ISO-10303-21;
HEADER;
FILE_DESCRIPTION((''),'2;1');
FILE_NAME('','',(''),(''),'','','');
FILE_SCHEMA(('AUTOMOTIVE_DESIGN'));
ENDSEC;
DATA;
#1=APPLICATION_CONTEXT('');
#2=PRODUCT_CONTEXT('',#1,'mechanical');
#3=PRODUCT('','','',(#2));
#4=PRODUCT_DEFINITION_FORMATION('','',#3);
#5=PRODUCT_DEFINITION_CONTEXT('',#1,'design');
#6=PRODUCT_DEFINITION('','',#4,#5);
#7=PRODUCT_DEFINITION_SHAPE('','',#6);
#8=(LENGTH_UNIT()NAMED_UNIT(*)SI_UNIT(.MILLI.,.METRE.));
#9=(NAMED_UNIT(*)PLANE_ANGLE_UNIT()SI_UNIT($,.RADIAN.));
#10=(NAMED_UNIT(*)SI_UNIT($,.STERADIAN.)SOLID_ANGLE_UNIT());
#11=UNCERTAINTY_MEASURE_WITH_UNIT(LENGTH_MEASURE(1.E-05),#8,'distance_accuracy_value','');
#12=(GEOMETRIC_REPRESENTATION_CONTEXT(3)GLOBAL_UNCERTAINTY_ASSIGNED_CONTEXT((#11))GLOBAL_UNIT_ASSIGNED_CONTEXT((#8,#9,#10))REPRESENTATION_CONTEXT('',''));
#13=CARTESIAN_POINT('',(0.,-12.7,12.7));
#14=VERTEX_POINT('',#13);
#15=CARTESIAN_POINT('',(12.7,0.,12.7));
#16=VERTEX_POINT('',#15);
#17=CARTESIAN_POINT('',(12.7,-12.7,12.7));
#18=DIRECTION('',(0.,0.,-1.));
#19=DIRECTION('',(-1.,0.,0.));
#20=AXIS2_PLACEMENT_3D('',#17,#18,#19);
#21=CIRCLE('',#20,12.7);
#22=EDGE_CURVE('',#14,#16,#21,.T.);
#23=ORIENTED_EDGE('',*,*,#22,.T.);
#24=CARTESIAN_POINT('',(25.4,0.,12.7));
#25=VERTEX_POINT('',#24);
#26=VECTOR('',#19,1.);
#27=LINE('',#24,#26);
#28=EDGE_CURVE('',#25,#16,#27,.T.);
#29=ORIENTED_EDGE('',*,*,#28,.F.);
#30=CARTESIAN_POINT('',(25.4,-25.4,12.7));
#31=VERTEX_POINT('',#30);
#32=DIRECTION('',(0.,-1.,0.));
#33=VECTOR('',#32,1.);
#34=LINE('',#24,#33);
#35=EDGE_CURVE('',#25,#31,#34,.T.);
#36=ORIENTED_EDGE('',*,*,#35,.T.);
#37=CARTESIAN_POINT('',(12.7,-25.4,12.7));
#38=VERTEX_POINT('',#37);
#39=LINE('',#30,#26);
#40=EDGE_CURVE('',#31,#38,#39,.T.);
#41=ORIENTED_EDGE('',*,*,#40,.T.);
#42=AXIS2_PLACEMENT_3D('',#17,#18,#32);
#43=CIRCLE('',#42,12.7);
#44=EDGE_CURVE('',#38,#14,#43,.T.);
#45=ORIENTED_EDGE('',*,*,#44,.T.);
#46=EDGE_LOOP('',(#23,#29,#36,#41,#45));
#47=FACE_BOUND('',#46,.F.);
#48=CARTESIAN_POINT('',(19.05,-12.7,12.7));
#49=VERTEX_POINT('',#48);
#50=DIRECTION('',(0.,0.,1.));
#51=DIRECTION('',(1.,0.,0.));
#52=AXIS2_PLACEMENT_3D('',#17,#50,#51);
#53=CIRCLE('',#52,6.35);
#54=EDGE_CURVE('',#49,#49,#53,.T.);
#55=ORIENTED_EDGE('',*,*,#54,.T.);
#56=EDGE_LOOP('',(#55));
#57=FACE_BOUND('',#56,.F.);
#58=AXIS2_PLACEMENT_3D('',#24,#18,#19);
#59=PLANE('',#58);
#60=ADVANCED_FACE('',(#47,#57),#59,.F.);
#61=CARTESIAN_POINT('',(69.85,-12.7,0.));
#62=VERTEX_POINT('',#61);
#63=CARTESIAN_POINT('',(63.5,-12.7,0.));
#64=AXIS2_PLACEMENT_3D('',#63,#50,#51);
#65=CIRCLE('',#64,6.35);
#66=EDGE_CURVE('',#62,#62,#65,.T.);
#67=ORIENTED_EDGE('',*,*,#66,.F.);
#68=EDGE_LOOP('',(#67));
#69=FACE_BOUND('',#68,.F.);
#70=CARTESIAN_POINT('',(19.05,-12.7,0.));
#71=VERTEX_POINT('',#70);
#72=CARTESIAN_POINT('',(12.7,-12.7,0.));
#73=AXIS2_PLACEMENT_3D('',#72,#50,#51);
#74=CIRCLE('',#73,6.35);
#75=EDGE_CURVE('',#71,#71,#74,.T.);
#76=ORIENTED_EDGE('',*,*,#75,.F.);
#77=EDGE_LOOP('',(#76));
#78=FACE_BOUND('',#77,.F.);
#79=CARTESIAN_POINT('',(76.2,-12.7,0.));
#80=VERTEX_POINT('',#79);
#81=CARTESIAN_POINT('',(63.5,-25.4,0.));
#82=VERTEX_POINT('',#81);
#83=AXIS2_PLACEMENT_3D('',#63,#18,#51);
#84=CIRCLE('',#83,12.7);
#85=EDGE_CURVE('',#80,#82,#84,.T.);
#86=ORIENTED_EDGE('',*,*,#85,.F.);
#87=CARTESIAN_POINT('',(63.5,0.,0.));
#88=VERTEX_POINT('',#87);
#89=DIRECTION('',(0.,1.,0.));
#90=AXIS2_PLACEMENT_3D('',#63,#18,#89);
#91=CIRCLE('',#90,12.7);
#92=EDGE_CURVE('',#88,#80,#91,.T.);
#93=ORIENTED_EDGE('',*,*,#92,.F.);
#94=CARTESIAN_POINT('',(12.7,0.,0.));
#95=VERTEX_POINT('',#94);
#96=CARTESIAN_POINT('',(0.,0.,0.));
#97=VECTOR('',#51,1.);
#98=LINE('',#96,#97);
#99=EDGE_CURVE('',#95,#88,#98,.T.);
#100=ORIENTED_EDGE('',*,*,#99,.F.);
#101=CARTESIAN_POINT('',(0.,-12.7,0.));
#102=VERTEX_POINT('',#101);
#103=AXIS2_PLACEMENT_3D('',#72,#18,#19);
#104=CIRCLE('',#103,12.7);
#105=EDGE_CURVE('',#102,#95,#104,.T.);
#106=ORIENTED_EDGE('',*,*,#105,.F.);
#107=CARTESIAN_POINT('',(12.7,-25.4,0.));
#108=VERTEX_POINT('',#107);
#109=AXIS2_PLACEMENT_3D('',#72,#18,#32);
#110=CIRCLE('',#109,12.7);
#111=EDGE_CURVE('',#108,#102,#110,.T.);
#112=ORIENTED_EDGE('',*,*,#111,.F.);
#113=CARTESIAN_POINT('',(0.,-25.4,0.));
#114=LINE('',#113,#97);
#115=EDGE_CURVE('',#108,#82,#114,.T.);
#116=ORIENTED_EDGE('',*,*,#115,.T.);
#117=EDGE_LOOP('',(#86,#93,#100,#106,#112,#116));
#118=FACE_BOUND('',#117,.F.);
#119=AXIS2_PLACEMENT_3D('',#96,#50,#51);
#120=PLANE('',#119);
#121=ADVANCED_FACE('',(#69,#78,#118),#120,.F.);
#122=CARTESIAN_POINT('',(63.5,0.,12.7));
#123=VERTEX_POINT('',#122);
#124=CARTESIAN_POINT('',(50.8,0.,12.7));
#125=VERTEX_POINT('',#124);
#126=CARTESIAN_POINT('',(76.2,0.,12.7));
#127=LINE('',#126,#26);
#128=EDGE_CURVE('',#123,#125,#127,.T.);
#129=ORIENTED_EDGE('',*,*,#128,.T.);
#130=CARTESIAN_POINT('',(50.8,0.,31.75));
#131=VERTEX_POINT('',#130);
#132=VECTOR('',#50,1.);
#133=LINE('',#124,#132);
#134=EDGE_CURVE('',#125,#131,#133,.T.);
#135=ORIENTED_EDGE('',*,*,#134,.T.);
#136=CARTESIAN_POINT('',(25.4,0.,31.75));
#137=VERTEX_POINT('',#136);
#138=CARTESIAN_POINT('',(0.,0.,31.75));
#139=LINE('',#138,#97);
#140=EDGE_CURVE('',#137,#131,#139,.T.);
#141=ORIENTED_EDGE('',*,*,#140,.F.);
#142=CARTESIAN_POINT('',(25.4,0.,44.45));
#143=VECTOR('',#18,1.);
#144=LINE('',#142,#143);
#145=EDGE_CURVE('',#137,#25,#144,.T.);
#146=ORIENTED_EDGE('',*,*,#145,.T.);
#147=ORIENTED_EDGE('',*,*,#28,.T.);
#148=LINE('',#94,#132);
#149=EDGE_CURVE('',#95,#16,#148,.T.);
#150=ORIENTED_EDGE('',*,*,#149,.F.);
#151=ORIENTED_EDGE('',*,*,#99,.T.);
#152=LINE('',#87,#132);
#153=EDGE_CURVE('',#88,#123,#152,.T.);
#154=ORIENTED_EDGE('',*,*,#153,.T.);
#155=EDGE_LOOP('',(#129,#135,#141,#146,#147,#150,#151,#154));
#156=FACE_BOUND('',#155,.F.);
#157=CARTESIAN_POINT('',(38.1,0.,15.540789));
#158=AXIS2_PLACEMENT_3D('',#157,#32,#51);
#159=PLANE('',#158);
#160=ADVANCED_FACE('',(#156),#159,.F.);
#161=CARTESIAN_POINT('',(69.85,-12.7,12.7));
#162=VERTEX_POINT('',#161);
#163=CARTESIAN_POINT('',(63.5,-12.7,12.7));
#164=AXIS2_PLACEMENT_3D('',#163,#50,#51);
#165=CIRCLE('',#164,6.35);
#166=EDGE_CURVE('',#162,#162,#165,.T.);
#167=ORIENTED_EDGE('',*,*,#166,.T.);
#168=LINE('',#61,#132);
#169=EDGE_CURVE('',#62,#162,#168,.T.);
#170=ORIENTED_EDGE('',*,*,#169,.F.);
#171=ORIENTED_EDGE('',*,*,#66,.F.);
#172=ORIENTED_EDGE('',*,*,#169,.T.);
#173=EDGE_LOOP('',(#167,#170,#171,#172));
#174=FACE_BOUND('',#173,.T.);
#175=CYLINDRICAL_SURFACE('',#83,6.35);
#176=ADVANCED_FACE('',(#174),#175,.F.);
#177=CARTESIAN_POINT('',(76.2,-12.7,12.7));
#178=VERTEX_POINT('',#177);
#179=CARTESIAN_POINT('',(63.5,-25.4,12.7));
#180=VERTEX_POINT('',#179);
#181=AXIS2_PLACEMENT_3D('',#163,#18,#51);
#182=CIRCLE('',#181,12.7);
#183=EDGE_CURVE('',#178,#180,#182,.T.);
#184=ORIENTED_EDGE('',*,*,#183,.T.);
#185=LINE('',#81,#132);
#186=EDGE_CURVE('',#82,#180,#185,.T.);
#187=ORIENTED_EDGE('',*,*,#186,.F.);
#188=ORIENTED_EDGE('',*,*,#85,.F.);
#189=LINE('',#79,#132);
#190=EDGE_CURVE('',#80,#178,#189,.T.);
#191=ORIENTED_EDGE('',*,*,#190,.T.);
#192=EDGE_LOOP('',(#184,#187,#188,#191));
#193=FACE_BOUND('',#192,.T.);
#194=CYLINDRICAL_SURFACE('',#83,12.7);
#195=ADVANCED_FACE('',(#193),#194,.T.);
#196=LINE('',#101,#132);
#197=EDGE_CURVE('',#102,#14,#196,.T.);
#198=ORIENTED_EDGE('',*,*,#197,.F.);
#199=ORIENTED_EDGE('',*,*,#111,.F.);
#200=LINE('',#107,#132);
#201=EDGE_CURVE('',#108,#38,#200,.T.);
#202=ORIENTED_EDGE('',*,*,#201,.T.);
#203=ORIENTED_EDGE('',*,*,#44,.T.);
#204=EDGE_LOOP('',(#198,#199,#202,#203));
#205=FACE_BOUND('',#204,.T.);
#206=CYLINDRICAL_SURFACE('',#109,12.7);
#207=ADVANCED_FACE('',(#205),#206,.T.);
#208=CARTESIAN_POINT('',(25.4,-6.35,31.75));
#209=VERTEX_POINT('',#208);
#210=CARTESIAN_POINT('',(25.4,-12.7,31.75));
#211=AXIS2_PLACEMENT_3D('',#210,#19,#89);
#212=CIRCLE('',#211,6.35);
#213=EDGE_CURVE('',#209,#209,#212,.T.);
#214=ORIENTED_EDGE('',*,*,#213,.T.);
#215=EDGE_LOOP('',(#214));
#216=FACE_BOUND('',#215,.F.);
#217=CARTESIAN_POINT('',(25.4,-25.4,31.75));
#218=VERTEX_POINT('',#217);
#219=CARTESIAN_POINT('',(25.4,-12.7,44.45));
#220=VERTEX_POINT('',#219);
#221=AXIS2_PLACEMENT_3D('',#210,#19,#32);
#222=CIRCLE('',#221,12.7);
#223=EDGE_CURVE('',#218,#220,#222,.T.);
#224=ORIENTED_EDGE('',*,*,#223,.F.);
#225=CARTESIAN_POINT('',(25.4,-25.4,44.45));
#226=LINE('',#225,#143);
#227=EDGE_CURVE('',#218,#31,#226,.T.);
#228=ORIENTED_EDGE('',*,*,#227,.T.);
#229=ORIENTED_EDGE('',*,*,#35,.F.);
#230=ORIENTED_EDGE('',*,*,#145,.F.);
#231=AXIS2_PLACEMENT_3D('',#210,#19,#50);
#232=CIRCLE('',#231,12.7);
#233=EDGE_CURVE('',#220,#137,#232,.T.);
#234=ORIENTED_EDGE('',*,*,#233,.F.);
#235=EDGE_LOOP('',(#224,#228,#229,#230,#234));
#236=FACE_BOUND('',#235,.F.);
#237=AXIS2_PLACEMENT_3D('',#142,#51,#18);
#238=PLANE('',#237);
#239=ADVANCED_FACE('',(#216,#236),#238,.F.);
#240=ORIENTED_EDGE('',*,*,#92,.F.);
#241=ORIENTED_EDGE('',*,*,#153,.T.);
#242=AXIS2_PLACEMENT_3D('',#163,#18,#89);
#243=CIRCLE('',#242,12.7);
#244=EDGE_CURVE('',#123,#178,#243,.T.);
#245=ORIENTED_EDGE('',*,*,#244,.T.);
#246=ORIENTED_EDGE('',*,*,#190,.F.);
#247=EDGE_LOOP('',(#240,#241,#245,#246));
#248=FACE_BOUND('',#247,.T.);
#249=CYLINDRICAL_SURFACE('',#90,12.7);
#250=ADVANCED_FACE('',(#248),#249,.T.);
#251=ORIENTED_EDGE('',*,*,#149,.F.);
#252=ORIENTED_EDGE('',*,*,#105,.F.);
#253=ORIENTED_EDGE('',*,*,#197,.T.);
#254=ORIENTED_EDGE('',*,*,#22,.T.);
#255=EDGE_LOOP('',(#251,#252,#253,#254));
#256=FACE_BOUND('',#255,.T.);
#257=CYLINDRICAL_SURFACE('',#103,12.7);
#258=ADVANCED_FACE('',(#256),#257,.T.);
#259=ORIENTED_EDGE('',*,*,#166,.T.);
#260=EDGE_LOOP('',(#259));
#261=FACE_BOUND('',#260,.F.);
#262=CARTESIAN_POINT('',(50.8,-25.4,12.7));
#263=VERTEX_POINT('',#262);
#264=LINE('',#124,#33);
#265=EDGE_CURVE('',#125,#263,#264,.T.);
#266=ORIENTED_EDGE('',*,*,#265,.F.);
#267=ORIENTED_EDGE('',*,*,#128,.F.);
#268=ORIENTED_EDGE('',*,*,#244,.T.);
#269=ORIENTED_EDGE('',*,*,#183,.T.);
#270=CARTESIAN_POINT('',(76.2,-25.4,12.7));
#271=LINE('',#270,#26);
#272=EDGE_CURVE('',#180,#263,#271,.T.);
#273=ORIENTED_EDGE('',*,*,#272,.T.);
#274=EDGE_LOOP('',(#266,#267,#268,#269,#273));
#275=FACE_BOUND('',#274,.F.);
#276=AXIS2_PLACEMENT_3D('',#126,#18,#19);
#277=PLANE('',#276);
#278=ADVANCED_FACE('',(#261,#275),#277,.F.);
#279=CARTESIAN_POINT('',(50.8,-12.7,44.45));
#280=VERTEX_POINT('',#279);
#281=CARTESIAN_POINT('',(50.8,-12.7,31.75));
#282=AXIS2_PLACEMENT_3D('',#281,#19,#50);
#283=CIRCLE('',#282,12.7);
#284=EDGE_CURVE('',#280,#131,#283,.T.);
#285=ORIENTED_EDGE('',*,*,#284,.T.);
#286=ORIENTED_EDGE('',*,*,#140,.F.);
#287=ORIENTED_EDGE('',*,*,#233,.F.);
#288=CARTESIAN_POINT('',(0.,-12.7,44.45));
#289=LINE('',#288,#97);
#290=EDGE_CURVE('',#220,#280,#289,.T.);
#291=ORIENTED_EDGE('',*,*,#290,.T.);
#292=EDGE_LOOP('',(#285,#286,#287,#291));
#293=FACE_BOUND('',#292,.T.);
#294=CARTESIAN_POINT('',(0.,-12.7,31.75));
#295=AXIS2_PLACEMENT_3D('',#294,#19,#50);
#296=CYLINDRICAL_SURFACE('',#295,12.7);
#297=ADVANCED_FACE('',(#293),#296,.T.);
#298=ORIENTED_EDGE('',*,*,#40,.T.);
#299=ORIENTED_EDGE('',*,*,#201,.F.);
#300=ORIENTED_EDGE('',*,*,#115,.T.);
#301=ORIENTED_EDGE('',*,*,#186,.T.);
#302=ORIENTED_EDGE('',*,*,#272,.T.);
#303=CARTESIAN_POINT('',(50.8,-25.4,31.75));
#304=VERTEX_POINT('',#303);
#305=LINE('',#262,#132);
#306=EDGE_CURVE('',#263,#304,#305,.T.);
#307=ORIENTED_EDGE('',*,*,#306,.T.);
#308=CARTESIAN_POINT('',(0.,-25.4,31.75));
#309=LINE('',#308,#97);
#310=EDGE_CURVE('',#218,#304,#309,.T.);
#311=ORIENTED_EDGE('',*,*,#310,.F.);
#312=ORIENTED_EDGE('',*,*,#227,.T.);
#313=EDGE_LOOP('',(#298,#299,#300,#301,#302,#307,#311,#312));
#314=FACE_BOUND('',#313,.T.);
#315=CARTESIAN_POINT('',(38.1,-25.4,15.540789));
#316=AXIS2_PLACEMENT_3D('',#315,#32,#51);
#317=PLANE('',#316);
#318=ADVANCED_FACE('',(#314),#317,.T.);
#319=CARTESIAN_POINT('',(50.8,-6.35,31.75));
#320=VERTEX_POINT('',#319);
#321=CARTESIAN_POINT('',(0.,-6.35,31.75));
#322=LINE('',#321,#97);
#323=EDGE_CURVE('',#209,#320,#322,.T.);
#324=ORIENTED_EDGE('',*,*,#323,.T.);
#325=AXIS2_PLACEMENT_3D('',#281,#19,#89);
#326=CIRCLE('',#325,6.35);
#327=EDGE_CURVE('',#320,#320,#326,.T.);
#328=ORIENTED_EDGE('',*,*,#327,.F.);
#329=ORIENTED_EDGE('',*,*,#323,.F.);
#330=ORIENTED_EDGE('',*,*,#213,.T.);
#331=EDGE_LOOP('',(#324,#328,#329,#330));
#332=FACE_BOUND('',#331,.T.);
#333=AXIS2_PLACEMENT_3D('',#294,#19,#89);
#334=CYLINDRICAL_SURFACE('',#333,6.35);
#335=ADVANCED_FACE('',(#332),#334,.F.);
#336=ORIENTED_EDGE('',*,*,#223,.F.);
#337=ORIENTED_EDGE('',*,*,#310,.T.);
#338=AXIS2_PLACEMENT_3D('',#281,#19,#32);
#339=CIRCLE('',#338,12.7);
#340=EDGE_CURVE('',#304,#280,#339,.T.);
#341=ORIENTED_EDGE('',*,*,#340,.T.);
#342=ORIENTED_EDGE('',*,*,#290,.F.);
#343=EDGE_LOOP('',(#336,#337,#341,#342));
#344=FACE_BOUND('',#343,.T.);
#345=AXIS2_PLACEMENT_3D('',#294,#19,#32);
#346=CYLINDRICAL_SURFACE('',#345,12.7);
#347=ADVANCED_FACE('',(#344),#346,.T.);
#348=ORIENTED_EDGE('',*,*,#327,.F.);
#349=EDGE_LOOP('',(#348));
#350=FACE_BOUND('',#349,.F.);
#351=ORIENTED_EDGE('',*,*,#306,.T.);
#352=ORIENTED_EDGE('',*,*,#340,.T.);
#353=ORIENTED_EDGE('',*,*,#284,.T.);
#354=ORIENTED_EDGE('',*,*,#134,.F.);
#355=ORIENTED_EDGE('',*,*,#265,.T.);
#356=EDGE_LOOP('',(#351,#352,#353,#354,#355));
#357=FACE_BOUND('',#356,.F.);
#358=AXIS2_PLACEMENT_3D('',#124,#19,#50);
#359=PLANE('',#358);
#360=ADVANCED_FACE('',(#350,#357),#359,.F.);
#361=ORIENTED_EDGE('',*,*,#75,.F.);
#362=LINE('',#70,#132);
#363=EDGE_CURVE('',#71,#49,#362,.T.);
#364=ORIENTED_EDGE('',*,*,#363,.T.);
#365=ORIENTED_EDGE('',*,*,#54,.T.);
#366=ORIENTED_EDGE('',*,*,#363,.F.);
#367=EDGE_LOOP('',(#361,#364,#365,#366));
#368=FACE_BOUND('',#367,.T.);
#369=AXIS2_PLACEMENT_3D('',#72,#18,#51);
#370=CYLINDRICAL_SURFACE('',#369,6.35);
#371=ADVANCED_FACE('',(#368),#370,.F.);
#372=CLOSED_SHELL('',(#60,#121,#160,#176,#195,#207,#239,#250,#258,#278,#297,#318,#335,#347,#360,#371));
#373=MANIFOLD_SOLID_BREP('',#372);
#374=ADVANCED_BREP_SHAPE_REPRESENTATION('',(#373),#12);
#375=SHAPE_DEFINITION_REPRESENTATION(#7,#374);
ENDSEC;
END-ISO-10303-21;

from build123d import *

# Parameters (mm, degrees)
F1_DEPTH = 25.4
F2_R     = 6.35
F3_DEPTH = 76.2
F4_R     = 6.35
F5_DEPTH = 12.7


# Not quite as in the source:
# - a feature names something its author has since deleted; it is built from what else it names


with BuildPart() as f1:
    # F0 (on Front) → F1 (new body)
    with BuildSketch(Plane.XZ):
        Polygon((0, 12.7), (0, 0), (76.2, 0), (76.2, 12.7), (50.8, 12.7), (50.8, 44.45), (25.4, 44.45), (25.4, 12.7), align=None)
    extrude(amount=F1_DEPTH)

    # F2 (on Right) → F3 (cut)
    with BuildSketch(Plane.YZ):
        with Locations((-12.7, 31.75)):
            Circle(F2_R)
        with BuildLine():
            ThreePointArc((-25.4, 31.75), (-21.6802561211, 40.7302561211), (-12.7, 44.45))
            Line((-12.7, 44.45), (-25.4, 44.45))
            Line((-25.4, 44.45), (-25.4, 31.75))
        make_face()
        with BuildLine():
            ThreePointArc((-12.7, 44.45), (-3.7197438789, 40.7302561211), (0, 31.75))
            Line((0, 31.75), (0, 44.45))
            Line((0, 44.45), (-12.7, 44.45))
        make_face()
    extrude(amount=F3_DEPTH, mode=Mode.SUBTRACT)

    # F4 (on Top) → F5 (cut)
    with BuildSketch(Plane.XY):
        with Locations((63.5, -12.7)):
            Circle(F4_R)
        with BuildLine():
            ThreePointArc((12.7, -25.4), (3.7197438789, -21.6802561211), (0, -12.7))
            Line((0, -12.7), (0, -25.4))
            Line((0, -25.4), (12.7, -25.4))
        make_face()
        with BuildLine():
            ThreePointArc((0, -12.7), (3.7197438789, -3.7197438789), (12.7, 0))
            Line((12.7, 0), (0, 0))
            Line((0, 0), (0, -12.7))
        make_face()
        with Locations((12.7, -12.7)):
            Circle(F4_R)
        with BuildLine():
            ThreePointArc((76.2, -12.7), (72.4802561211, -21.6802561211), (63.5, -25.4))
            Line((63.5, -25.4), (76.2, -25.4))
            Line((76.2, -25.4), (76.2, -12.7))
        make_face()
        with BuildLine():
            ThreePointArc((63.5, 0), (72.4802561211, -3.7197438789), (76.2, -12.7))
            Line((76.2, -12.7), (76.2, 0))
            Line((76.2, 0), (63.5, 0))
        make_face()
    extrude(amount=F5_DEPTH, mode=Mode.SUBTRACT)


solid = f1.part
